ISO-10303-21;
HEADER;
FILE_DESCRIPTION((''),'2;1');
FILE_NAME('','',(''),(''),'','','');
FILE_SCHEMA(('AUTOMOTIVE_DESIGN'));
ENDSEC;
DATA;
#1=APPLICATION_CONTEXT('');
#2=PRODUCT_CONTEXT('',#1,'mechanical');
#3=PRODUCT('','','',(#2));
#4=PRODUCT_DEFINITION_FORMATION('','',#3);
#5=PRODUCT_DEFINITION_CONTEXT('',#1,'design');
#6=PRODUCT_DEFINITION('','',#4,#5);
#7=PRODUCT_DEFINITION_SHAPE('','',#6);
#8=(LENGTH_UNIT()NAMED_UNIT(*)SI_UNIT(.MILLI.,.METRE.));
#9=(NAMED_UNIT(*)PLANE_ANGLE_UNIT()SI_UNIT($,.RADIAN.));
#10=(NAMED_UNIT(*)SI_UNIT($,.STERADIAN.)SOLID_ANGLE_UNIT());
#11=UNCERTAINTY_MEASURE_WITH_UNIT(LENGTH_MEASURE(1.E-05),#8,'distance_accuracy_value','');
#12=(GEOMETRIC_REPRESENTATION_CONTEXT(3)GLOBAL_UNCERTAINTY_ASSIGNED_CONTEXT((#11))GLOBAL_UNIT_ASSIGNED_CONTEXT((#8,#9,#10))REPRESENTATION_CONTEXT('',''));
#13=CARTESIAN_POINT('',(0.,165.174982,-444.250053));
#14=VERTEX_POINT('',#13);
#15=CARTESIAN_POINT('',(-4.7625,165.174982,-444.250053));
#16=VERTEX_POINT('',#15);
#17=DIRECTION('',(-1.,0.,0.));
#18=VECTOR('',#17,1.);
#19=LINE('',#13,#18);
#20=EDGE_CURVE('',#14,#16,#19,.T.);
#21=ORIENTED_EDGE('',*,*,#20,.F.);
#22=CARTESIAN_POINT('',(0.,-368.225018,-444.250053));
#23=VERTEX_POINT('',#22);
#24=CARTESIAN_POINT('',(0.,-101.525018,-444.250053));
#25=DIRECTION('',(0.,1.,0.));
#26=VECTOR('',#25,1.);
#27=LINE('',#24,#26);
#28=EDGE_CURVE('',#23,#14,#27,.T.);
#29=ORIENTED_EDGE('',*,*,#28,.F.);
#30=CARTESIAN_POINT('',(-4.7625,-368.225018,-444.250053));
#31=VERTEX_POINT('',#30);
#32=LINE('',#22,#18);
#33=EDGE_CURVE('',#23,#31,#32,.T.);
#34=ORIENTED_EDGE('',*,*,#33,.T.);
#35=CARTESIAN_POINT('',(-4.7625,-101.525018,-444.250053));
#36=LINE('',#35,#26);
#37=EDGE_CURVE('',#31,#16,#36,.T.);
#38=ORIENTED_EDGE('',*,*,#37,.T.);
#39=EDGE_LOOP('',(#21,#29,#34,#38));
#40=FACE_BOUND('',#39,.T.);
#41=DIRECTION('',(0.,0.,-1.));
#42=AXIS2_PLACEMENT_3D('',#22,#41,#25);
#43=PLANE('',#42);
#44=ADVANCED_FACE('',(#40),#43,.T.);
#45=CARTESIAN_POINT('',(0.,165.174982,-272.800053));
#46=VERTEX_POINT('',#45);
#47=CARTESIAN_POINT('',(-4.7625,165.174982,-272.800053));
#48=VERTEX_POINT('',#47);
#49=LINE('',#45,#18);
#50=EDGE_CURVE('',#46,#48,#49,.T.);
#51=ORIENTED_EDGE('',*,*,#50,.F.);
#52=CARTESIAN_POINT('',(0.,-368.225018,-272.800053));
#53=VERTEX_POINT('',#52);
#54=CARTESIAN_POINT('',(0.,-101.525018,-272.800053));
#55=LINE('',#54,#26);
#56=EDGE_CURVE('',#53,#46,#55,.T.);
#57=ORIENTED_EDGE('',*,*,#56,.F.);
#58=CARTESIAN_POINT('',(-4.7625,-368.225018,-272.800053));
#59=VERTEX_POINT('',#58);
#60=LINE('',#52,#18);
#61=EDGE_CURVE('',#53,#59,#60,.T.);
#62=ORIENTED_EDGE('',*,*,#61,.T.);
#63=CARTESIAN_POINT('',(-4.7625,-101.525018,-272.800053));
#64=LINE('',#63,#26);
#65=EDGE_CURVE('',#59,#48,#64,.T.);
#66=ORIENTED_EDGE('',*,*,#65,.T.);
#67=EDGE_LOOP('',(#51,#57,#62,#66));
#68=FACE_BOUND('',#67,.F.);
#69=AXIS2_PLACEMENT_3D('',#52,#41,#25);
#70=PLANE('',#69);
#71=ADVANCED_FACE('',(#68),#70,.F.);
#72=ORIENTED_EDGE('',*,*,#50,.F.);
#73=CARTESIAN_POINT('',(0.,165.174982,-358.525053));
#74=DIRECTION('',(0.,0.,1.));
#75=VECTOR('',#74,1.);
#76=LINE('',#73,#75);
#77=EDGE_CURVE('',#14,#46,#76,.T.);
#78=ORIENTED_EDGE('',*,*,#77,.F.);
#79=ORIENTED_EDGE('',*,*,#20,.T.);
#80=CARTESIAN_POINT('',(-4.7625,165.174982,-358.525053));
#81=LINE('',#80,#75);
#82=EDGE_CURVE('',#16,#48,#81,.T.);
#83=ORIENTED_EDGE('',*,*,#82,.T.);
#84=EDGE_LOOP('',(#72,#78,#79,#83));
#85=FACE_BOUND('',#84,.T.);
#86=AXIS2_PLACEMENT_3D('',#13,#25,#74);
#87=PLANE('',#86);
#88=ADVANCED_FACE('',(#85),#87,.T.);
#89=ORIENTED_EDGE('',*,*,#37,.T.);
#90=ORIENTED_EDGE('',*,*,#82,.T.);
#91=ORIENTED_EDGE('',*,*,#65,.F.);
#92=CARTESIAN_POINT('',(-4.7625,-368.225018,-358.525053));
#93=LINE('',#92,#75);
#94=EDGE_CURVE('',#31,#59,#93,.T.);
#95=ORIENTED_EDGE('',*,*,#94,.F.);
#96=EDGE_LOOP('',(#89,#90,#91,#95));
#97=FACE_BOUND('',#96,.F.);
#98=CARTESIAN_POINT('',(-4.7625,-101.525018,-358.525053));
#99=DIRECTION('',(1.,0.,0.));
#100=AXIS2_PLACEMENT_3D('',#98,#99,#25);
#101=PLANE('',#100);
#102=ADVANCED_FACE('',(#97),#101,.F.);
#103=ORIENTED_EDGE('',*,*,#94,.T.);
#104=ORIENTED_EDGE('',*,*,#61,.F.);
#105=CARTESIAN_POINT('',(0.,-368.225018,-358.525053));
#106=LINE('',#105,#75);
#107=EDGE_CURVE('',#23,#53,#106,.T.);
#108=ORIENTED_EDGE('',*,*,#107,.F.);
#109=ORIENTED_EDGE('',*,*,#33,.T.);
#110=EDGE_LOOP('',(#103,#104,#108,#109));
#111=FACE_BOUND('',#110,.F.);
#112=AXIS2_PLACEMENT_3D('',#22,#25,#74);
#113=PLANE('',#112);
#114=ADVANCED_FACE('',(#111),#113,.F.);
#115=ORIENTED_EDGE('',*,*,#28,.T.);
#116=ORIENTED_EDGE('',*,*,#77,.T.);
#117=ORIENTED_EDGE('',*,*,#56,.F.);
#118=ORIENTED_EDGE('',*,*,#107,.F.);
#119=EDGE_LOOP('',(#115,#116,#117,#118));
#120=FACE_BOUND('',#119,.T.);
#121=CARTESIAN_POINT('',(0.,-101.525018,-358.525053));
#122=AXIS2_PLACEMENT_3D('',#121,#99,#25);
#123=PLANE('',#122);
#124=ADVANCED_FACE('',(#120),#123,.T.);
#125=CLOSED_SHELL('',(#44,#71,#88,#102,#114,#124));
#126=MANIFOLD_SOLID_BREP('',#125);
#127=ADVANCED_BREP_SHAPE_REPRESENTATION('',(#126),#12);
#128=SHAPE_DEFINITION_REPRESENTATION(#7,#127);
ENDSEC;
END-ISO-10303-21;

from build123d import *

# Parameters (mm, degrees)
F0_W     = 533.4
F0_H     = 171.45
F1_DEPTH = 4.7625


# Not quite as in the source:
# - a length typed as a fraction of an inch, garbled in the dataset ("3 / 203.2 mm" for 3/8 in), is restored


with BuildPart() as f1:
    # F0 (on Right) → F1 (new body)
    with BuildSketch(Plane.YZ):
        with Locations((-101.5250182853, -358.5250534113)):
            Rectangle(F0_W, F0_H)
    extrude(amount=-F1_DEPTH)


solid = f1.part
